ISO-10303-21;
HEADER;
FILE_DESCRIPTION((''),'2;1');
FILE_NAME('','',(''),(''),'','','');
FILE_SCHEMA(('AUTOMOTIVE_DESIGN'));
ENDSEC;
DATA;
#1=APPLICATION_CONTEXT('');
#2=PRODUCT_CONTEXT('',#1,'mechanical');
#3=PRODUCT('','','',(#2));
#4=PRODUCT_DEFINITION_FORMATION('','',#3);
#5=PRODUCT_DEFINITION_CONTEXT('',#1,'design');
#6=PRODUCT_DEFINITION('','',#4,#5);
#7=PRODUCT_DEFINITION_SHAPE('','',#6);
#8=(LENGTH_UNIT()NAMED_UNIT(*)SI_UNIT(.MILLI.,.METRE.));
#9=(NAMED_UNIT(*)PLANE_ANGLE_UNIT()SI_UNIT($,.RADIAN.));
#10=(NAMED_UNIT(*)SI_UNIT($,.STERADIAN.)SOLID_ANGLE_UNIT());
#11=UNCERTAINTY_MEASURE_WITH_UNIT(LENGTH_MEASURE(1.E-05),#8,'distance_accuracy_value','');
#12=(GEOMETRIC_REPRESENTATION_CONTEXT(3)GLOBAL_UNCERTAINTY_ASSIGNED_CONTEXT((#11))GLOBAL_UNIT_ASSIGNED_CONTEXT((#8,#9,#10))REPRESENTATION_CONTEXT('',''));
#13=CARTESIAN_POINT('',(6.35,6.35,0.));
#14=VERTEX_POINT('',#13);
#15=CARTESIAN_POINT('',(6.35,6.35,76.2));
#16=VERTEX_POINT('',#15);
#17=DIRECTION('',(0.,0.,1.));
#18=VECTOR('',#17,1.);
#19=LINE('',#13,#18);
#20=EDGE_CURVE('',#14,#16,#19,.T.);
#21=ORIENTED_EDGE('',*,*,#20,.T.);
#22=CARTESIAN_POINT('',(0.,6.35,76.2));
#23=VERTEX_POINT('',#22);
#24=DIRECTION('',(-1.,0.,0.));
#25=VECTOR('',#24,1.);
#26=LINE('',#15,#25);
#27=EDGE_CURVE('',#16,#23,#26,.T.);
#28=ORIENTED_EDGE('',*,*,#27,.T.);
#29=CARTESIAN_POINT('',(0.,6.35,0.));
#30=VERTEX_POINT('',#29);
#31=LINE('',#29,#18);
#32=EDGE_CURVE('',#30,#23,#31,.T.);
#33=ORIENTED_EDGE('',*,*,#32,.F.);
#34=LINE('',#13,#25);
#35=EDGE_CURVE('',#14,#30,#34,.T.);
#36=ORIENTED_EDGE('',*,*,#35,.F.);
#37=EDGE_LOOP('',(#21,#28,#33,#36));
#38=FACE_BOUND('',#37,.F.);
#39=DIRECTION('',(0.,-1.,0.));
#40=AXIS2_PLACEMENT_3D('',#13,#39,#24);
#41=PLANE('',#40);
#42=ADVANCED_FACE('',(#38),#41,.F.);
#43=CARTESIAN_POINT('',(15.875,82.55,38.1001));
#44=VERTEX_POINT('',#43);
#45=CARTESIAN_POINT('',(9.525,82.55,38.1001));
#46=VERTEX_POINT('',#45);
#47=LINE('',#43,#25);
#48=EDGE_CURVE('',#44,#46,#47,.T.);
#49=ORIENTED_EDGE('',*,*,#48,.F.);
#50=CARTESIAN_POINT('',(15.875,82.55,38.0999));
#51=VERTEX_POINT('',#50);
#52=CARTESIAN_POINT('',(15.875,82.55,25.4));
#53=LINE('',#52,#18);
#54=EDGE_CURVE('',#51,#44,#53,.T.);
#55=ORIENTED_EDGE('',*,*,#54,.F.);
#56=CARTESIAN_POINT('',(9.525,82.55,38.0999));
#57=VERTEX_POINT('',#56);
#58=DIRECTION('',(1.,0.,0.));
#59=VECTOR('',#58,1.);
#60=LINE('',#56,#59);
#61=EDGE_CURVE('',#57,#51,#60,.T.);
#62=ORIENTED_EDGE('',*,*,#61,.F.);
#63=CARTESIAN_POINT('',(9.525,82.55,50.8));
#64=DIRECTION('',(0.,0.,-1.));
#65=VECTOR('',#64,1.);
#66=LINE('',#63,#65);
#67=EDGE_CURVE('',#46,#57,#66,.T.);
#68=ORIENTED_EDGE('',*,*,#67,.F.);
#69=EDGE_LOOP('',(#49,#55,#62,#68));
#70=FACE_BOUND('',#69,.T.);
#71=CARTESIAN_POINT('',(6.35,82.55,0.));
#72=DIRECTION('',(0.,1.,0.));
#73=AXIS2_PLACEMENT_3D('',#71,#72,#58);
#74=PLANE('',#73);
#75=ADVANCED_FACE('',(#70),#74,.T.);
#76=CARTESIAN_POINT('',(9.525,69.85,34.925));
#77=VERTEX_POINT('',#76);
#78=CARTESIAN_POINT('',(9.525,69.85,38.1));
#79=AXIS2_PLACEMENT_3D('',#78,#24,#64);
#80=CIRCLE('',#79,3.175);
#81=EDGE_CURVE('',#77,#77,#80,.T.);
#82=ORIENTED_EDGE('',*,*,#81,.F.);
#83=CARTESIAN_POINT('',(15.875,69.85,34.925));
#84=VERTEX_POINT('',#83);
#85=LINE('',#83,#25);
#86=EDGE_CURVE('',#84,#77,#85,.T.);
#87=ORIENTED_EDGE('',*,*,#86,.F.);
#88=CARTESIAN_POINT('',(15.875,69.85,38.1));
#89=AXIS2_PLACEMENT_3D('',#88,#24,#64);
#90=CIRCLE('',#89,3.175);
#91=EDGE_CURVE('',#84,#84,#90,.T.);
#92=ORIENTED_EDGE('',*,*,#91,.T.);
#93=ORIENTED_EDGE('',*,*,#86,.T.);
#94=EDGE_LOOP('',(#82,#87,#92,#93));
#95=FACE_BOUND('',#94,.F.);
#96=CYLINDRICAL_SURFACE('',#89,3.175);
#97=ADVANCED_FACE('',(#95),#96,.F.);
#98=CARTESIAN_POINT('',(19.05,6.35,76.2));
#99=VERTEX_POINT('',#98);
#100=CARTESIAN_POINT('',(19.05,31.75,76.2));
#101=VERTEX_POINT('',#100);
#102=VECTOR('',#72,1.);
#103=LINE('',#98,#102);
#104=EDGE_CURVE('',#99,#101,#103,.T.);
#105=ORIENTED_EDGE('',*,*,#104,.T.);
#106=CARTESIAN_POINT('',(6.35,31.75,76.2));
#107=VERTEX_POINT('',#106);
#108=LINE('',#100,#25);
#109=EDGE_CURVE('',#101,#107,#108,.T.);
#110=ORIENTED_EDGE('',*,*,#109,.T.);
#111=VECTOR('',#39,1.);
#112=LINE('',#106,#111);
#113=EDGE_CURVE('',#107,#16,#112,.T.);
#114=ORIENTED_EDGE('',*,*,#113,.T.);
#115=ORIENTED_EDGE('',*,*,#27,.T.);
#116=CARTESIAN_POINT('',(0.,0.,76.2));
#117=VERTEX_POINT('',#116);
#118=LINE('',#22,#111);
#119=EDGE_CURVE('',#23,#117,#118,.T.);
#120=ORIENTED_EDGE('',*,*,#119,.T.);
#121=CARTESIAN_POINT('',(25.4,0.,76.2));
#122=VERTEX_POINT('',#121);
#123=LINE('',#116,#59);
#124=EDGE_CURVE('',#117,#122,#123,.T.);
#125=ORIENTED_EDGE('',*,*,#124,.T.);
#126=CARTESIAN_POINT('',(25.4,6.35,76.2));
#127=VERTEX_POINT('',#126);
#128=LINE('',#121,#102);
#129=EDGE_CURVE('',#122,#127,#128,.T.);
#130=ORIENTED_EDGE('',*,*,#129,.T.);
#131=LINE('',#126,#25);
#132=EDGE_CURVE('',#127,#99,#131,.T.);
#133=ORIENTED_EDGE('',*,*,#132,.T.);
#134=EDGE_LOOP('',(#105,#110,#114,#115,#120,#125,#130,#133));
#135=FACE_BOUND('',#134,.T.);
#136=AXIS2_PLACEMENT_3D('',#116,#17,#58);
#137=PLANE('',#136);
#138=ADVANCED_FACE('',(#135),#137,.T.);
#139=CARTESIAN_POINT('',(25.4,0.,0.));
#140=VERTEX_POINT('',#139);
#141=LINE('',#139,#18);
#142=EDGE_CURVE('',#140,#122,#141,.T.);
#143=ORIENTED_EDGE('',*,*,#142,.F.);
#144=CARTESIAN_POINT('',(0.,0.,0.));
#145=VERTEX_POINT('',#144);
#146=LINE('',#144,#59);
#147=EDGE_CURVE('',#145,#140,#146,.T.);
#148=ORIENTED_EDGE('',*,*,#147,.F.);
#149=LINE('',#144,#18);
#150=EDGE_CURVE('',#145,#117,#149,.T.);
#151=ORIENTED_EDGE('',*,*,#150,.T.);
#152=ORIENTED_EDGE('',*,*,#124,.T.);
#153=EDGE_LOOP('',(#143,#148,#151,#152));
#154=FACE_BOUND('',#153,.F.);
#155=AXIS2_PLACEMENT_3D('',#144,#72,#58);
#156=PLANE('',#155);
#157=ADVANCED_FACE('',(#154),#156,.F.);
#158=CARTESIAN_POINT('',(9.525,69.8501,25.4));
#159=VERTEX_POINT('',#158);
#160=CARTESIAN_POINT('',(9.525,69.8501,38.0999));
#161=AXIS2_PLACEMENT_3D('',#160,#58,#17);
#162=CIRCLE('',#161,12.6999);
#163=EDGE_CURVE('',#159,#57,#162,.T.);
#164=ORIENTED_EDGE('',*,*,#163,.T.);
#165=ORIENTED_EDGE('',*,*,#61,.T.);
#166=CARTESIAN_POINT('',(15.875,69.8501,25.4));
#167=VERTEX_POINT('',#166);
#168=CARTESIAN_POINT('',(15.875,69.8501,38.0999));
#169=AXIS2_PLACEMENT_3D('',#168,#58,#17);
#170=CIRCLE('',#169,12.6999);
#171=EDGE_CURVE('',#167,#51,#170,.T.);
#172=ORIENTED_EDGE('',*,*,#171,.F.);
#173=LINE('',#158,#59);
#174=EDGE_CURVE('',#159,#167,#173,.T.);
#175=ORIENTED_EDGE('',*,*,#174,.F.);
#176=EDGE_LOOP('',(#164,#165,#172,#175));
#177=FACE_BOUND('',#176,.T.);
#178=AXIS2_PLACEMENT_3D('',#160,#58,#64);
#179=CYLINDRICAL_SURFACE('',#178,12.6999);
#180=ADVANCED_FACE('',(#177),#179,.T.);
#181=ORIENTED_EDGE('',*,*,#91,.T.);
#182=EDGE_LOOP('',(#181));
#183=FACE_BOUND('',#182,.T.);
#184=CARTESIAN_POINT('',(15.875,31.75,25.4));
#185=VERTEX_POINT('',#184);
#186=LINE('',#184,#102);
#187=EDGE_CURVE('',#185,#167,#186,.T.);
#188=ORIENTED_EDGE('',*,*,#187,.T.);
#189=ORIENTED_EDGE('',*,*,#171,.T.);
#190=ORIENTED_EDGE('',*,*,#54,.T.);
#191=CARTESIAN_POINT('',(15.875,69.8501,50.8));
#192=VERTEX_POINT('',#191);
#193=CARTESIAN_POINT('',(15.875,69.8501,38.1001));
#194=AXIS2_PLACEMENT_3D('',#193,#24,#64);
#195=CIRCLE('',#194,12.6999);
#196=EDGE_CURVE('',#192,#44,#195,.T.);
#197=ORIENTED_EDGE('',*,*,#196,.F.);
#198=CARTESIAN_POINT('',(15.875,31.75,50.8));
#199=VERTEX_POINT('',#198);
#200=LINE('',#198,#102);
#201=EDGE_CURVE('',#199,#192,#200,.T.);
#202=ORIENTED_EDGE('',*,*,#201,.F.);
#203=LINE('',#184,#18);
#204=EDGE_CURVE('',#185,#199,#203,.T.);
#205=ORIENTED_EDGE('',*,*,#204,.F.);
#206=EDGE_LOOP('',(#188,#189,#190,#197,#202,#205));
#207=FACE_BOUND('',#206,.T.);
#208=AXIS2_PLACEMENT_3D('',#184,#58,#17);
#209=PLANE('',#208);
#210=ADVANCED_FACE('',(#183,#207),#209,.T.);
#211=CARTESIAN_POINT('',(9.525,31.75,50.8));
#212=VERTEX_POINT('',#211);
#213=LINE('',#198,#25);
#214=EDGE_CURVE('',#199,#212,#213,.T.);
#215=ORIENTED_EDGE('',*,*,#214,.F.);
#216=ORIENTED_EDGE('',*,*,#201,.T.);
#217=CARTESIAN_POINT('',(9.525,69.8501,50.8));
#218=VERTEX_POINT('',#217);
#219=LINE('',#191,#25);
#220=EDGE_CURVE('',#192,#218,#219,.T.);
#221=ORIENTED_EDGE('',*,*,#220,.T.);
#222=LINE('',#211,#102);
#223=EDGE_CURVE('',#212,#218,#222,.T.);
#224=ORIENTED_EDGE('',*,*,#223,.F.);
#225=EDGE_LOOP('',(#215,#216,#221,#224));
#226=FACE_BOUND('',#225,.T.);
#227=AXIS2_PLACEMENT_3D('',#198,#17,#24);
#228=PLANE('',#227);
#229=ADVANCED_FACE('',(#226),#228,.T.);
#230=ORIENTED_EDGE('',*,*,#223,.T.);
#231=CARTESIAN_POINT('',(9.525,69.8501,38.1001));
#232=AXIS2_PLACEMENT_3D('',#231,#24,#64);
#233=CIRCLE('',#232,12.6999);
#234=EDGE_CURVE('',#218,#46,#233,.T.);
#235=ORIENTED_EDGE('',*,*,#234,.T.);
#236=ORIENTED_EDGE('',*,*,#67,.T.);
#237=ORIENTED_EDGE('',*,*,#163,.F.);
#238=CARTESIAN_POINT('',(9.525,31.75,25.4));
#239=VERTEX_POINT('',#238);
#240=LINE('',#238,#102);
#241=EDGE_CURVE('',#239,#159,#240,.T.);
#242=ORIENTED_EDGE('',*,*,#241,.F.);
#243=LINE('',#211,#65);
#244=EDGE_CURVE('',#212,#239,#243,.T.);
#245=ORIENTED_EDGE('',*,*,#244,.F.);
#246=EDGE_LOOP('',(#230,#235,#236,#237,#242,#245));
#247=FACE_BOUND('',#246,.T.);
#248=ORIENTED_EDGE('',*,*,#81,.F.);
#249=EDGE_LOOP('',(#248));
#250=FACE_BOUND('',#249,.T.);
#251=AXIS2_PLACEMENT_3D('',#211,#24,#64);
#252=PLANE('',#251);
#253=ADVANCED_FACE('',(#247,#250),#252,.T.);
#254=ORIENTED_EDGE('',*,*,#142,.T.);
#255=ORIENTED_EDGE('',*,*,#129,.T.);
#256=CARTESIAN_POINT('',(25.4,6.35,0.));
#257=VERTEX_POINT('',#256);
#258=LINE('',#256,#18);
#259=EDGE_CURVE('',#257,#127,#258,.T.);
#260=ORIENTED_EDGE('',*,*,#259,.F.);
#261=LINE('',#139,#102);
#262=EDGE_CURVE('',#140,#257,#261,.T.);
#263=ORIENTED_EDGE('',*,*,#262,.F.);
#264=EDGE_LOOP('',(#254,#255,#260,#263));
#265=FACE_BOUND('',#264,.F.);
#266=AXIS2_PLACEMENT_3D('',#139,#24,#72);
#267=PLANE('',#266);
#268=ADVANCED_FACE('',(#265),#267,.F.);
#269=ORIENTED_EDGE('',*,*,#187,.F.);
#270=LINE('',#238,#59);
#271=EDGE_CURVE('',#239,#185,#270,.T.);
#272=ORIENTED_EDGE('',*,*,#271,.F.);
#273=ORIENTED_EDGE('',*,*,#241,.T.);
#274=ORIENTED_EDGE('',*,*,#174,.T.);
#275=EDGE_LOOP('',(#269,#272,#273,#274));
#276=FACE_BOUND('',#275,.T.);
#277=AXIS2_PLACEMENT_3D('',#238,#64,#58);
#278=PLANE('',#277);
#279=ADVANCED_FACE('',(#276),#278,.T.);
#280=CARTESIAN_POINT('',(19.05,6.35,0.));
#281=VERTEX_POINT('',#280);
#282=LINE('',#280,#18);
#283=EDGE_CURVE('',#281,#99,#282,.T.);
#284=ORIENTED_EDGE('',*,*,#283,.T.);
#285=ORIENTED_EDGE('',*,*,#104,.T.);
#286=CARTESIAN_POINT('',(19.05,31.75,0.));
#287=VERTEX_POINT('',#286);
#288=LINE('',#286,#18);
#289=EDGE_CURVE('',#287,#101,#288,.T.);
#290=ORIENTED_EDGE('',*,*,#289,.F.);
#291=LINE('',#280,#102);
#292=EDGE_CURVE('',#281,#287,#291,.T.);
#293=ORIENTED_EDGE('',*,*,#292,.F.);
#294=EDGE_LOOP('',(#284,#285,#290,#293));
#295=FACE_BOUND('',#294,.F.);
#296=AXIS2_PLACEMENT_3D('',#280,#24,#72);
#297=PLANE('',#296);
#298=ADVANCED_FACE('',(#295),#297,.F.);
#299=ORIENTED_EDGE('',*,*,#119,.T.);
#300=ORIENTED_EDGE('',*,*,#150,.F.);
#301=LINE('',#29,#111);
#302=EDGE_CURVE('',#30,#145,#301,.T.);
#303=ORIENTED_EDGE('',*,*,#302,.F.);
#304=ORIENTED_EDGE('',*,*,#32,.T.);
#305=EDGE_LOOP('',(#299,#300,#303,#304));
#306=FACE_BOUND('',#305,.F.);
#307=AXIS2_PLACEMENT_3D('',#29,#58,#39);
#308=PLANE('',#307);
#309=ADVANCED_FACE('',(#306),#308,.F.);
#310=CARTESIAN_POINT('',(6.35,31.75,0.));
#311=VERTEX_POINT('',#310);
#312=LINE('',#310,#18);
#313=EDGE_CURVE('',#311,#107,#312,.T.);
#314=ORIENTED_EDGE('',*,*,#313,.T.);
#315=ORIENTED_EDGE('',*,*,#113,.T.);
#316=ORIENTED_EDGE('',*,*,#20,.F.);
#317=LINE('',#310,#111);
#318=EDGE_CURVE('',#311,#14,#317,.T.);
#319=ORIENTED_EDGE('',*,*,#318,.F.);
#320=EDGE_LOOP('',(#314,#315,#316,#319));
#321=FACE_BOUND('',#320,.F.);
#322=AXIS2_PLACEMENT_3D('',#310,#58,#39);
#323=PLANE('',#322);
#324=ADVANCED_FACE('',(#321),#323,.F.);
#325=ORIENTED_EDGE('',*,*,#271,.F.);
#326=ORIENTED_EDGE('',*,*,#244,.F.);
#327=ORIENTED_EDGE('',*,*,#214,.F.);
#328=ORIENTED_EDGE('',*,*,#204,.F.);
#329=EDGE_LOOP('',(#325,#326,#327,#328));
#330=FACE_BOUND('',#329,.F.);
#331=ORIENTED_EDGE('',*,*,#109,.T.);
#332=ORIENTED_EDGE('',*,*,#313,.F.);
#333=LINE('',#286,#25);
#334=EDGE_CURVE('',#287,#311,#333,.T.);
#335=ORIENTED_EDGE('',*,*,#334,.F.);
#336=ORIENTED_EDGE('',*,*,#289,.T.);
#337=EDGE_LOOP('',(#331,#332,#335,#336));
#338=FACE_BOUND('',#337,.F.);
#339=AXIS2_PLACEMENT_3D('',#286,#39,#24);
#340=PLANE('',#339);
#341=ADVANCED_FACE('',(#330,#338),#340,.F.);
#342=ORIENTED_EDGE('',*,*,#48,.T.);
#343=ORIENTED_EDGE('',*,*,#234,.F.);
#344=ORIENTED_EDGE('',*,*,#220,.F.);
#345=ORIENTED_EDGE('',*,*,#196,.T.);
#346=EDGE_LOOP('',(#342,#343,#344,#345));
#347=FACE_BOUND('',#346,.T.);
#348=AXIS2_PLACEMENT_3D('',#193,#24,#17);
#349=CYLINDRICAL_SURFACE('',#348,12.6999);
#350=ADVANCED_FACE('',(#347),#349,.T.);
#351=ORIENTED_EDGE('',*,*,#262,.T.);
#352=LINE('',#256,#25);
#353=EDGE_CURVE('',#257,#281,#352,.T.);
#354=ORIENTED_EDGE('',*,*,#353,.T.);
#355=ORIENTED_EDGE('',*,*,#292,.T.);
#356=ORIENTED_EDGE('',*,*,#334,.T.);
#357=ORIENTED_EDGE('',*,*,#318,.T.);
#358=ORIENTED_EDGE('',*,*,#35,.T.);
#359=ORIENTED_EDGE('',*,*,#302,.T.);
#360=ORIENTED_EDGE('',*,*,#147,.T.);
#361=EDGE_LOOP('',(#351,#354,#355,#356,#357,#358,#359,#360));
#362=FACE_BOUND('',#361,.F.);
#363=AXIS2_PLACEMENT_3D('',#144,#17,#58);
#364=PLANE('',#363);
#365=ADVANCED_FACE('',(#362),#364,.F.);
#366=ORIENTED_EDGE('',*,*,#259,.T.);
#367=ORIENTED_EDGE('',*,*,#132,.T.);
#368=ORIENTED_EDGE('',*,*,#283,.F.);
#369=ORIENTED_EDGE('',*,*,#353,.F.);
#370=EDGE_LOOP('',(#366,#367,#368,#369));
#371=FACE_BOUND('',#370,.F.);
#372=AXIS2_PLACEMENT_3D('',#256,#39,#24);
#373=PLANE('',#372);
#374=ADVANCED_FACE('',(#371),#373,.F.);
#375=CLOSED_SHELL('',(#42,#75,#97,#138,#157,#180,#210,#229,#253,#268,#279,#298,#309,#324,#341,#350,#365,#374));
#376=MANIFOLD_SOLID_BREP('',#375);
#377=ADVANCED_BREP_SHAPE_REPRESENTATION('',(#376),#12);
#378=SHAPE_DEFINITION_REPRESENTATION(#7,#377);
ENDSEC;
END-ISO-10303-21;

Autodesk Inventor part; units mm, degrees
ref_plane "YZ Plane" through (0, 0, 0) normal (1, 0, 0) x (0, 1, 0)
ref_plane "XZ Plane" through (0, 0, 0) normal (0, 1, 0) x (-1, 0, 0)
ref_plane "XY Plane" through (0, 0, 0) normal (0, 0, 1) x (1, 0, 0)
sketch "Sketch1" plane through (0, 0, 0) normal (0, 0, 1) x (1, 0, 0)
  line L0 (0, 0) -> (25.4, 0)
  line L1 (25.4, 0) -> (25.4, 6.35)
  line L2 (25.4, 6.35) -> (19.05, 6.35)
  line L3 (19.05, 6.35) -> (19.05, 31.75)
  line L4 (19.05, 31.75) -> (6.35, 31.75)
  line L5 (6.35, 31.75) -> (6.35, 6.35)
  line L6 (6.35, 6.35) -> (0, 6.35)
  line L7 (0, 6.35) -> (0, 0)
  dimension "d0" = 12.7
  dimension "d1" = 6.35
  dimension "d2" = 6.35
  dimension "d3" = 6.35
  dimension "d4" = 25.4
extrude "Extrusion1" add sketch "Sketch1" along normal blind 76.2
sketch "Sketch2" plane through (6.35, 31.75, 0) normal (0, 1, 0) x (1, 0, 0)
  line L0 (9.525, -50.8) -> (3.175, -50.8)
  line L1 (3.175, -50.8) -> (3.175, -25.4)
  line L2 (3.175, -25.4) -> (9.525, -25.4)
  line L3 (9.525, -25.4) -> (9.525, -50.8)
  line L4 (0, 0) -> (0, -76.2) projected
  line L5 (12.7, 0) -> (12.7, -76.2) projected
  line L6 (12.7, -76.2) -> (0, -76.2) projected
  line L7 (12.7, 0) -> (0, 0) projected
  point P0 (-6.35, 0)
  dimension "d7" = 12.7
  dimension "d8" = 3.175
  dimension "d9" = 3.175
  dimension "d10" = 6.35
  dimension "d11" = 76.2
  dimension "d12" = 25.4
  dimension "d13" = 25.4
extrude "Extrusion2" add sketch "Sketch2" along normal blind 50.8 contours L0 L1 L2 L3
fillet "Fillet1" radius 12.7 2 edges at (12.7, 82.55, 50.8) (12.7, 82.55, 25.4)
hole "Hole1" at (15.875, 69.85, 38.1) direction (-1, 0, 0) diameter 6.35 end through all
properties part number "slider"
